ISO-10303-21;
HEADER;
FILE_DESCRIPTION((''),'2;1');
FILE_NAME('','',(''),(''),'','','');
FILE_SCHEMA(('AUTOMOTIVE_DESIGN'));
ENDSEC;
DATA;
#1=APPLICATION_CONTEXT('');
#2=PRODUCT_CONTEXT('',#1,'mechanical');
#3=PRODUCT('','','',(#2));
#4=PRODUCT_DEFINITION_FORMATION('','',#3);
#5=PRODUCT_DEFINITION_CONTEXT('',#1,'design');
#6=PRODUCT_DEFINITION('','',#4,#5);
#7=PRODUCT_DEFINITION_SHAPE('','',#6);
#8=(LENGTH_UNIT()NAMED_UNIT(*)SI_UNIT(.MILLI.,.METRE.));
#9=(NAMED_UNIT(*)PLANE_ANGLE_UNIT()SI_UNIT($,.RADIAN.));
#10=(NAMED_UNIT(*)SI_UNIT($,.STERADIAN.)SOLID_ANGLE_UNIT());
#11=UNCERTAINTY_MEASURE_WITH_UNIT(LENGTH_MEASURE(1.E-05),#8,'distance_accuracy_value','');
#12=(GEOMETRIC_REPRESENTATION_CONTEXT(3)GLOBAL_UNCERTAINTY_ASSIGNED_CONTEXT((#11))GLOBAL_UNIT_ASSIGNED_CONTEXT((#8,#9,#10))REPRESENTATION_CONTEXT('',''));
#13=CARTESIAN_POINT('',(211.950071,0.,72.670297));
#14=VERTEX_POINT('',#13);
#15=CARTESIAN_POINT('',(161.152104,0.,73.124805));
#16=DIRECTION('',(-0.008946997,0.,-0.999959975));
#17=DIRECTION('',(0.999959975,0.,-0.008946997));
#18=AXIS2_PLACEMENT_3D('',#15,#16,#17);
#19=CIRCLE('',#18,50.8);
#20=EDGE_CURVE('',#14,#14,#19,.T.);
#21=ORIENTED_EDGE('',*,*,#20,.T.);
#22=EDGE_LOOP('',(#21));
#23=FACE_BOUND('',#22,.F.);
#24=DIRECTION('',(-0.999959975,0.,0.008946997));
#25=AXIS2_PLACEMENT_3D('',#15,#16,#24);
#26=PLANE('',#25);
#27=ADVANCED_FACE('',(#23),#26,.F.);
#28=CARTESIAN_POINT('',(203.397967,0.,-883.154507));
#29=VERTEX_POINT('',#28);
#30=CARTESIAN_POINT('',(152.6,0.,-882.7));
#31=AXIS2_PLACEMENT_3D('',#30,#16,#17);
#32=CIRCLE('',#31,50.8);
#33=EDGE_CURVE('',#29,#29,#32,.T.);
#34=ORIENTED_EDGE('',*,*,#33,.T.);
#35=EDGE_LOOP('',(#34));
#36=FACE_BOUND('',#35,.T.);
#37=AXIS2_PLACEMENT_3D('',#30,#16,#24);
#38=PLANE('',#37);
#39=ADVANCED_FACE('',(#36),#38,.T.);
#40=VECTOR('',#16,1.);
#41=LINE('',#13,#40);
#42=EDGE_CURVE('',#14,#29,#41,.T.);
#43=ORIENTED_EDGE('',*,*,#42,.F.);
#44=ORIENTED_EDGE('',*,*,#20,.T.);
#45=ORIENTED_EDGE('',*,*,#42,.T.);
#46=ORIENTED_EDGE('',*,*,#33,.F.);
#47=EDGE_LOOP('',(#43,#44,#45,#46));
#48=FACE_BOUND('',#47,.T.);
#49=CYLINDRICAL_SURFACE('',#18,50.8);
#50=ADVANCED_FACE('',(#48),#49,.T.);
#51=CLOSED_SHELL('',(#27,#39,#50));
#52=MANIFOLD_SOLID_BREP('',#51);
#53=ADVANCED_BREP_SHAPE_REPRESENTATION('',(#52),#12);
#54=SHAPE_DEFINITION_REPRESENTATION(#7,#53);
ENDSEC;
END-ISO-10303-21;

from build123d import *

# Parameters (mm, degrees)
F2_R = 50.8


with BuildPart() as f3:
    # F3: sweep along a path in F0
    with BuildLine(Plane.XZ) as f3_path:
        Line((161.1521043367, 73.1248049508), (152.6, -882.7))
    # F2 (on face) → F3 (sweep)
    with BuildSketch(Plane(origin=(-3.608930889, 0, -403.3516813269), x_dir=(0.9999599748, 0, -0.0089469974), z_dir=(-0.0089469974, 0, -0.9999599748))):
        with Locations((160.4914067552, 0)):
            Circle(F2_R)
    sweep(path=f3_path.line)


solid = f3.part
